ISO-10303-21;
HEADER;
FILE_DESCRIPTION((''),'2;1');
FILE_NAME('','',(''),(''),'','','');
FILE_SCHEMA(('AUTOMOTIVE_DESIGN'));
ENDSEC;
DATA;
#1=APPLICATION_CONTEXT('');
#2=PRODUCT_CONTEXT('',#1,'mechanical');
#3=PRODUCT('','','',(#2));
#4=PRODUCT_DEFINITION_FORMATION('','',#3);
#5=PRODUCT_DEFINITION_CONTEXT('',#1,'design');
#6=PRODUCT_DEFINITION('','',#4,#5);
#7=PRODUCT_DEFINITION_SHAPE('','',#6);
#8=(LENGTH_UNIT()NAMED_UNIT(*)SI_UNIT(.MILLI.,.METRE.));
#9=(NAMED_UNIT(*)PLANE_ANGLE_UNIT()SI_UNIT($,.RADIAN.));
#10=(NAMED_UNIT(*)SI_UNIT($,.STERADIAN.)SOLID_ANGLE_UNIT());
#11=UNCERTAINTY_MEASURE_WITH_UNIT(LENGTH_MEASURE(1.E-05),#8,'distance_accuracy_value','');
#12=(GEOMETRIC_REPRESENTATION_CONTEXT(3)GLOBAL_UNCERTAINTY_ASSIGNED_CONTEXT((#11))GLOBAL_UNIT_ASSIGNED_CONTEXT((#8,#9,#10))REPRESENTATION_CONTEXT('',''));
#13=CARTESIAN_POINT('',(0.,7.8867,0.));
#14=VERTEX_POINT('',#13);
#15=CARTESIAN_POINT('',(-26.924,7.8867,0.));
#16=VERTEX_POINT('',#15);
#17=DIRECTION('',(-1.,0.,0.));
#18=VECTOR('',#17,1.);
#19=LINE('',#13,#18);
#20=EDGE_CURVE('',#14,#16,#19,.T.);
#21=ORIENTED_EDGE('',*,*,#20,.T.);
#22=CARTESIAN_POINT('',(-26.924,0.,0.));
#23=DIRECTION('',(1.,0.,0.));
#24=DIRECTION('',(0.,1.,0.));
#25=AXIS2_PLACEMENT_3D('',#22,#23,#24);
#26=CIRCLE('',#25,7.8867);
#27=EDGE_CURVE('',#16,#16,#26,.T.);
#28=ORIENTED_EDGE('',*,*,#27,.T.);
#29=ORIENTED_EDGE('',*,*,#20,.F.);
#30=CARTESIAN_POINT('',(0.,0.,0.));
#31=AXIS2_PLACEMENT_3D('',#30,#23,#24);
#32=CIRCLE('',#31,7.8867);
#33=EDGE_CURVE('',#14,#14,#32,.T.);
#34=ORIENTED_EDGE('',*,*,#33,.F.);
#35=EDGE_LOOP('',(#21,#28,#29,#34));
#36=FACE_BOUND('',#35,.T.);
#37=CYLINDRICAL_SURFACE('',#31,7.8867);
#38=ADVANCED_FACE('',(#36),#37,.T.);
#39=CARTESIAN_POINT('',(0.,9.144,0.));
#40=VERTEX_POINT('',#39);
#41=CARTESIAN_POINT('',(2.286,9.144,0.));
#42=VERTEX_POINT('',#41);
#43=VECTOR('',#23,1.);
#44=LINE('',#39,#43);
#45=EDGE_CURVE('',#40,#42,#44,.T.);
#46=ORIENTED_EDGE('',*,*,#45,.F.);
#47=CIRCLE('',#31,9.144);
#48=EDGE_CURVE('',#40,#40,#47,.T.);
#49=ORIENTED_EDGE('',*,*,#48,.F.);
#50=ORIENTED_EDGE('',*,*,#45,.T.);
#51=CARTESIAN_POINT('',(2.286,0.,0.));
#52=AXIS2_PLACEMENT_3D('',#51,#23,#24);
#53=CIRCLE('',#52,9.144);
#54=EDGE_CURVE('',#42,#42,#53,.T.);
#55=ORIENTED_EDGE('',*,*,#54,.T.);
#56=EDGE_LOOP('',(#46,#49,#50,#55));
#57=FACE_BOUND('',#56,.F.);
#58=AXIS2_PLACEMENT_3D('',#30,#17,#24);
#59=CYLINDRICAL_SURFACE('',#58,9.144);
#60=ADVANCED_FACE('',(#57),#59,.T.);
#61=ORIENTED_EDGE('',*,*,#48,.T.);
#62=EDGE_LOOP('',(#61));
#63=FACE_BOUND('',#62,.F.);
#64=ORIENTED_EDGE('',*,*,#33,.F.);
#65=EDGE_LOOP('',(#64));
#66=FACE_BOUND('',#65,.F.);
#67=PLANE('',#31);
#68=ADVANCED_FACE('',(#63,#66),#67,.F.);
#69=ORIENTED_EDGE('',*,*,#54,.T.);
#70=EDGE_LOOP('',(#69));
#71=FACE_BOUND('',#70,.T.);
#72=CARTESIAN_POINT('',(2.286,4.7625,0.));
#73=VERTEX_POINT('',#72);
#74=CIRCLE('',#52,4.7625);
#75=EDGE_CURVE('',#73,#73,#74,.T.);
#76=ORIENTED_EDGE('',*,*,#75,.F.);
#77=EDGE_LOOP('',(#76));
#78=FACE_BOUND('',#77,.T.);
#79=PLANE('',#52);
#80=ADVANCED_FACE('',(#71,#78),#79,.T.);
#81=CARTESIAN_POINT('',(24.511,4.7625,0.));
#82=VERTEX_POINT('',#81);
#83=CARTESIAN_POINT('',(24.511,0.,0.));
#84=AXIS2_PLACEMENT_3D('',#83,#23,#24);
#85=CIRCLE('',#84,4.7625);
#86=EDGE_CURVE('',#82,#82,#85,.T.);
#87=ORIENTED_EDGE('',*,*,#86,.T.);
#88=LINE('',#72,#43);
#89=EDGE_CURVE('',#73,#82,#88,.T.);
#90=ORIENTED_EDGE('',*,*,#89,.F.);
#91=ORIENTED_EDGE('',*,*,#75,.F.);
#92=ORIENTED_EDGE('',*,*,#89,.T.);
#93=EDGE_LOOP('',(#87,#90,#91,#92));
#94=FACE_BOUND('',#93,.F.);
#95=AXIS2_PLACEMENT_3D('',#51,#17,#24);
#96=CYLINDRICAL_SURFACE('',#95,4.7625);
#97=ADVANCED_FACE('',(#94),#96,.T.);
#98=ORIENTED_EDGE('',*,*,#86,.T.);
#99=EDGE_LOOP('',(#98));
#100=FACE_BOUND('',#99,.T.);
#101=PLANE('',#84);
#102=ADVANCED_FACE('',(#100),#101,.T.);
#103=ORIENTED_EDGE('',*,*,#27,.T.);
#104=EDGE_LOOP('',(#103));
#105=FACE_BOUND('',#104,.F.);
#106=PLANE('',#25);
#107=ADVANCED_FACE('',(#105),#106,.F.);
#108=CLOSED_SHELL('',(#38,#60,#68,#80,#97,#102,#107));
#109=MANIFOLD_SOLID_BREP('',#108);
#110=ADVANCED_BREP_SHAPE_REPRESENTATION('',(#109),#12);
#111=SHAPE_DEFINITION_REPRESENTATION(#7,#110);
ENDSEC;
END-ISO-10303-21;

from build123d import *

# Parameters (mm, degrees)
F0_R     = 7.8867
F1_DEPTH = 26.924
F0_R_2   = 9.144
F2_DEPTH = 2.286
F3_R     = 4.7625
F4_DEPTH = 22.225


# Not quite as in the source:
# - a length typed as a fraction of an inch, garbled in the dataset ("3 / 203.2 mm" for 3/8 in), is restored


with BuildPart() as f1:
    # F0 (on Right) → F1 (new body)
    with BuildSketch(Plane.YZ):
        Circle(F0_R)
    extrude(amount=-F1_DEPTH)

    # F0 (on Right) → F2 (join)
    with BuildSketch(Plane.YZ):
        Circle(F0_R_2)
        Circle(F0_R, mode=Mode.SUBTRACT)
        Circle(F0_R)
    extrude(amount=F2_DEPTH)

    # F3 (on face) → F4 (join)
    with BuildSketch(Plane.YZ.offset(2.286)):
        Circle(F3_R)
    extrude(amount=F4_DEPTH)


solid = f1.part
